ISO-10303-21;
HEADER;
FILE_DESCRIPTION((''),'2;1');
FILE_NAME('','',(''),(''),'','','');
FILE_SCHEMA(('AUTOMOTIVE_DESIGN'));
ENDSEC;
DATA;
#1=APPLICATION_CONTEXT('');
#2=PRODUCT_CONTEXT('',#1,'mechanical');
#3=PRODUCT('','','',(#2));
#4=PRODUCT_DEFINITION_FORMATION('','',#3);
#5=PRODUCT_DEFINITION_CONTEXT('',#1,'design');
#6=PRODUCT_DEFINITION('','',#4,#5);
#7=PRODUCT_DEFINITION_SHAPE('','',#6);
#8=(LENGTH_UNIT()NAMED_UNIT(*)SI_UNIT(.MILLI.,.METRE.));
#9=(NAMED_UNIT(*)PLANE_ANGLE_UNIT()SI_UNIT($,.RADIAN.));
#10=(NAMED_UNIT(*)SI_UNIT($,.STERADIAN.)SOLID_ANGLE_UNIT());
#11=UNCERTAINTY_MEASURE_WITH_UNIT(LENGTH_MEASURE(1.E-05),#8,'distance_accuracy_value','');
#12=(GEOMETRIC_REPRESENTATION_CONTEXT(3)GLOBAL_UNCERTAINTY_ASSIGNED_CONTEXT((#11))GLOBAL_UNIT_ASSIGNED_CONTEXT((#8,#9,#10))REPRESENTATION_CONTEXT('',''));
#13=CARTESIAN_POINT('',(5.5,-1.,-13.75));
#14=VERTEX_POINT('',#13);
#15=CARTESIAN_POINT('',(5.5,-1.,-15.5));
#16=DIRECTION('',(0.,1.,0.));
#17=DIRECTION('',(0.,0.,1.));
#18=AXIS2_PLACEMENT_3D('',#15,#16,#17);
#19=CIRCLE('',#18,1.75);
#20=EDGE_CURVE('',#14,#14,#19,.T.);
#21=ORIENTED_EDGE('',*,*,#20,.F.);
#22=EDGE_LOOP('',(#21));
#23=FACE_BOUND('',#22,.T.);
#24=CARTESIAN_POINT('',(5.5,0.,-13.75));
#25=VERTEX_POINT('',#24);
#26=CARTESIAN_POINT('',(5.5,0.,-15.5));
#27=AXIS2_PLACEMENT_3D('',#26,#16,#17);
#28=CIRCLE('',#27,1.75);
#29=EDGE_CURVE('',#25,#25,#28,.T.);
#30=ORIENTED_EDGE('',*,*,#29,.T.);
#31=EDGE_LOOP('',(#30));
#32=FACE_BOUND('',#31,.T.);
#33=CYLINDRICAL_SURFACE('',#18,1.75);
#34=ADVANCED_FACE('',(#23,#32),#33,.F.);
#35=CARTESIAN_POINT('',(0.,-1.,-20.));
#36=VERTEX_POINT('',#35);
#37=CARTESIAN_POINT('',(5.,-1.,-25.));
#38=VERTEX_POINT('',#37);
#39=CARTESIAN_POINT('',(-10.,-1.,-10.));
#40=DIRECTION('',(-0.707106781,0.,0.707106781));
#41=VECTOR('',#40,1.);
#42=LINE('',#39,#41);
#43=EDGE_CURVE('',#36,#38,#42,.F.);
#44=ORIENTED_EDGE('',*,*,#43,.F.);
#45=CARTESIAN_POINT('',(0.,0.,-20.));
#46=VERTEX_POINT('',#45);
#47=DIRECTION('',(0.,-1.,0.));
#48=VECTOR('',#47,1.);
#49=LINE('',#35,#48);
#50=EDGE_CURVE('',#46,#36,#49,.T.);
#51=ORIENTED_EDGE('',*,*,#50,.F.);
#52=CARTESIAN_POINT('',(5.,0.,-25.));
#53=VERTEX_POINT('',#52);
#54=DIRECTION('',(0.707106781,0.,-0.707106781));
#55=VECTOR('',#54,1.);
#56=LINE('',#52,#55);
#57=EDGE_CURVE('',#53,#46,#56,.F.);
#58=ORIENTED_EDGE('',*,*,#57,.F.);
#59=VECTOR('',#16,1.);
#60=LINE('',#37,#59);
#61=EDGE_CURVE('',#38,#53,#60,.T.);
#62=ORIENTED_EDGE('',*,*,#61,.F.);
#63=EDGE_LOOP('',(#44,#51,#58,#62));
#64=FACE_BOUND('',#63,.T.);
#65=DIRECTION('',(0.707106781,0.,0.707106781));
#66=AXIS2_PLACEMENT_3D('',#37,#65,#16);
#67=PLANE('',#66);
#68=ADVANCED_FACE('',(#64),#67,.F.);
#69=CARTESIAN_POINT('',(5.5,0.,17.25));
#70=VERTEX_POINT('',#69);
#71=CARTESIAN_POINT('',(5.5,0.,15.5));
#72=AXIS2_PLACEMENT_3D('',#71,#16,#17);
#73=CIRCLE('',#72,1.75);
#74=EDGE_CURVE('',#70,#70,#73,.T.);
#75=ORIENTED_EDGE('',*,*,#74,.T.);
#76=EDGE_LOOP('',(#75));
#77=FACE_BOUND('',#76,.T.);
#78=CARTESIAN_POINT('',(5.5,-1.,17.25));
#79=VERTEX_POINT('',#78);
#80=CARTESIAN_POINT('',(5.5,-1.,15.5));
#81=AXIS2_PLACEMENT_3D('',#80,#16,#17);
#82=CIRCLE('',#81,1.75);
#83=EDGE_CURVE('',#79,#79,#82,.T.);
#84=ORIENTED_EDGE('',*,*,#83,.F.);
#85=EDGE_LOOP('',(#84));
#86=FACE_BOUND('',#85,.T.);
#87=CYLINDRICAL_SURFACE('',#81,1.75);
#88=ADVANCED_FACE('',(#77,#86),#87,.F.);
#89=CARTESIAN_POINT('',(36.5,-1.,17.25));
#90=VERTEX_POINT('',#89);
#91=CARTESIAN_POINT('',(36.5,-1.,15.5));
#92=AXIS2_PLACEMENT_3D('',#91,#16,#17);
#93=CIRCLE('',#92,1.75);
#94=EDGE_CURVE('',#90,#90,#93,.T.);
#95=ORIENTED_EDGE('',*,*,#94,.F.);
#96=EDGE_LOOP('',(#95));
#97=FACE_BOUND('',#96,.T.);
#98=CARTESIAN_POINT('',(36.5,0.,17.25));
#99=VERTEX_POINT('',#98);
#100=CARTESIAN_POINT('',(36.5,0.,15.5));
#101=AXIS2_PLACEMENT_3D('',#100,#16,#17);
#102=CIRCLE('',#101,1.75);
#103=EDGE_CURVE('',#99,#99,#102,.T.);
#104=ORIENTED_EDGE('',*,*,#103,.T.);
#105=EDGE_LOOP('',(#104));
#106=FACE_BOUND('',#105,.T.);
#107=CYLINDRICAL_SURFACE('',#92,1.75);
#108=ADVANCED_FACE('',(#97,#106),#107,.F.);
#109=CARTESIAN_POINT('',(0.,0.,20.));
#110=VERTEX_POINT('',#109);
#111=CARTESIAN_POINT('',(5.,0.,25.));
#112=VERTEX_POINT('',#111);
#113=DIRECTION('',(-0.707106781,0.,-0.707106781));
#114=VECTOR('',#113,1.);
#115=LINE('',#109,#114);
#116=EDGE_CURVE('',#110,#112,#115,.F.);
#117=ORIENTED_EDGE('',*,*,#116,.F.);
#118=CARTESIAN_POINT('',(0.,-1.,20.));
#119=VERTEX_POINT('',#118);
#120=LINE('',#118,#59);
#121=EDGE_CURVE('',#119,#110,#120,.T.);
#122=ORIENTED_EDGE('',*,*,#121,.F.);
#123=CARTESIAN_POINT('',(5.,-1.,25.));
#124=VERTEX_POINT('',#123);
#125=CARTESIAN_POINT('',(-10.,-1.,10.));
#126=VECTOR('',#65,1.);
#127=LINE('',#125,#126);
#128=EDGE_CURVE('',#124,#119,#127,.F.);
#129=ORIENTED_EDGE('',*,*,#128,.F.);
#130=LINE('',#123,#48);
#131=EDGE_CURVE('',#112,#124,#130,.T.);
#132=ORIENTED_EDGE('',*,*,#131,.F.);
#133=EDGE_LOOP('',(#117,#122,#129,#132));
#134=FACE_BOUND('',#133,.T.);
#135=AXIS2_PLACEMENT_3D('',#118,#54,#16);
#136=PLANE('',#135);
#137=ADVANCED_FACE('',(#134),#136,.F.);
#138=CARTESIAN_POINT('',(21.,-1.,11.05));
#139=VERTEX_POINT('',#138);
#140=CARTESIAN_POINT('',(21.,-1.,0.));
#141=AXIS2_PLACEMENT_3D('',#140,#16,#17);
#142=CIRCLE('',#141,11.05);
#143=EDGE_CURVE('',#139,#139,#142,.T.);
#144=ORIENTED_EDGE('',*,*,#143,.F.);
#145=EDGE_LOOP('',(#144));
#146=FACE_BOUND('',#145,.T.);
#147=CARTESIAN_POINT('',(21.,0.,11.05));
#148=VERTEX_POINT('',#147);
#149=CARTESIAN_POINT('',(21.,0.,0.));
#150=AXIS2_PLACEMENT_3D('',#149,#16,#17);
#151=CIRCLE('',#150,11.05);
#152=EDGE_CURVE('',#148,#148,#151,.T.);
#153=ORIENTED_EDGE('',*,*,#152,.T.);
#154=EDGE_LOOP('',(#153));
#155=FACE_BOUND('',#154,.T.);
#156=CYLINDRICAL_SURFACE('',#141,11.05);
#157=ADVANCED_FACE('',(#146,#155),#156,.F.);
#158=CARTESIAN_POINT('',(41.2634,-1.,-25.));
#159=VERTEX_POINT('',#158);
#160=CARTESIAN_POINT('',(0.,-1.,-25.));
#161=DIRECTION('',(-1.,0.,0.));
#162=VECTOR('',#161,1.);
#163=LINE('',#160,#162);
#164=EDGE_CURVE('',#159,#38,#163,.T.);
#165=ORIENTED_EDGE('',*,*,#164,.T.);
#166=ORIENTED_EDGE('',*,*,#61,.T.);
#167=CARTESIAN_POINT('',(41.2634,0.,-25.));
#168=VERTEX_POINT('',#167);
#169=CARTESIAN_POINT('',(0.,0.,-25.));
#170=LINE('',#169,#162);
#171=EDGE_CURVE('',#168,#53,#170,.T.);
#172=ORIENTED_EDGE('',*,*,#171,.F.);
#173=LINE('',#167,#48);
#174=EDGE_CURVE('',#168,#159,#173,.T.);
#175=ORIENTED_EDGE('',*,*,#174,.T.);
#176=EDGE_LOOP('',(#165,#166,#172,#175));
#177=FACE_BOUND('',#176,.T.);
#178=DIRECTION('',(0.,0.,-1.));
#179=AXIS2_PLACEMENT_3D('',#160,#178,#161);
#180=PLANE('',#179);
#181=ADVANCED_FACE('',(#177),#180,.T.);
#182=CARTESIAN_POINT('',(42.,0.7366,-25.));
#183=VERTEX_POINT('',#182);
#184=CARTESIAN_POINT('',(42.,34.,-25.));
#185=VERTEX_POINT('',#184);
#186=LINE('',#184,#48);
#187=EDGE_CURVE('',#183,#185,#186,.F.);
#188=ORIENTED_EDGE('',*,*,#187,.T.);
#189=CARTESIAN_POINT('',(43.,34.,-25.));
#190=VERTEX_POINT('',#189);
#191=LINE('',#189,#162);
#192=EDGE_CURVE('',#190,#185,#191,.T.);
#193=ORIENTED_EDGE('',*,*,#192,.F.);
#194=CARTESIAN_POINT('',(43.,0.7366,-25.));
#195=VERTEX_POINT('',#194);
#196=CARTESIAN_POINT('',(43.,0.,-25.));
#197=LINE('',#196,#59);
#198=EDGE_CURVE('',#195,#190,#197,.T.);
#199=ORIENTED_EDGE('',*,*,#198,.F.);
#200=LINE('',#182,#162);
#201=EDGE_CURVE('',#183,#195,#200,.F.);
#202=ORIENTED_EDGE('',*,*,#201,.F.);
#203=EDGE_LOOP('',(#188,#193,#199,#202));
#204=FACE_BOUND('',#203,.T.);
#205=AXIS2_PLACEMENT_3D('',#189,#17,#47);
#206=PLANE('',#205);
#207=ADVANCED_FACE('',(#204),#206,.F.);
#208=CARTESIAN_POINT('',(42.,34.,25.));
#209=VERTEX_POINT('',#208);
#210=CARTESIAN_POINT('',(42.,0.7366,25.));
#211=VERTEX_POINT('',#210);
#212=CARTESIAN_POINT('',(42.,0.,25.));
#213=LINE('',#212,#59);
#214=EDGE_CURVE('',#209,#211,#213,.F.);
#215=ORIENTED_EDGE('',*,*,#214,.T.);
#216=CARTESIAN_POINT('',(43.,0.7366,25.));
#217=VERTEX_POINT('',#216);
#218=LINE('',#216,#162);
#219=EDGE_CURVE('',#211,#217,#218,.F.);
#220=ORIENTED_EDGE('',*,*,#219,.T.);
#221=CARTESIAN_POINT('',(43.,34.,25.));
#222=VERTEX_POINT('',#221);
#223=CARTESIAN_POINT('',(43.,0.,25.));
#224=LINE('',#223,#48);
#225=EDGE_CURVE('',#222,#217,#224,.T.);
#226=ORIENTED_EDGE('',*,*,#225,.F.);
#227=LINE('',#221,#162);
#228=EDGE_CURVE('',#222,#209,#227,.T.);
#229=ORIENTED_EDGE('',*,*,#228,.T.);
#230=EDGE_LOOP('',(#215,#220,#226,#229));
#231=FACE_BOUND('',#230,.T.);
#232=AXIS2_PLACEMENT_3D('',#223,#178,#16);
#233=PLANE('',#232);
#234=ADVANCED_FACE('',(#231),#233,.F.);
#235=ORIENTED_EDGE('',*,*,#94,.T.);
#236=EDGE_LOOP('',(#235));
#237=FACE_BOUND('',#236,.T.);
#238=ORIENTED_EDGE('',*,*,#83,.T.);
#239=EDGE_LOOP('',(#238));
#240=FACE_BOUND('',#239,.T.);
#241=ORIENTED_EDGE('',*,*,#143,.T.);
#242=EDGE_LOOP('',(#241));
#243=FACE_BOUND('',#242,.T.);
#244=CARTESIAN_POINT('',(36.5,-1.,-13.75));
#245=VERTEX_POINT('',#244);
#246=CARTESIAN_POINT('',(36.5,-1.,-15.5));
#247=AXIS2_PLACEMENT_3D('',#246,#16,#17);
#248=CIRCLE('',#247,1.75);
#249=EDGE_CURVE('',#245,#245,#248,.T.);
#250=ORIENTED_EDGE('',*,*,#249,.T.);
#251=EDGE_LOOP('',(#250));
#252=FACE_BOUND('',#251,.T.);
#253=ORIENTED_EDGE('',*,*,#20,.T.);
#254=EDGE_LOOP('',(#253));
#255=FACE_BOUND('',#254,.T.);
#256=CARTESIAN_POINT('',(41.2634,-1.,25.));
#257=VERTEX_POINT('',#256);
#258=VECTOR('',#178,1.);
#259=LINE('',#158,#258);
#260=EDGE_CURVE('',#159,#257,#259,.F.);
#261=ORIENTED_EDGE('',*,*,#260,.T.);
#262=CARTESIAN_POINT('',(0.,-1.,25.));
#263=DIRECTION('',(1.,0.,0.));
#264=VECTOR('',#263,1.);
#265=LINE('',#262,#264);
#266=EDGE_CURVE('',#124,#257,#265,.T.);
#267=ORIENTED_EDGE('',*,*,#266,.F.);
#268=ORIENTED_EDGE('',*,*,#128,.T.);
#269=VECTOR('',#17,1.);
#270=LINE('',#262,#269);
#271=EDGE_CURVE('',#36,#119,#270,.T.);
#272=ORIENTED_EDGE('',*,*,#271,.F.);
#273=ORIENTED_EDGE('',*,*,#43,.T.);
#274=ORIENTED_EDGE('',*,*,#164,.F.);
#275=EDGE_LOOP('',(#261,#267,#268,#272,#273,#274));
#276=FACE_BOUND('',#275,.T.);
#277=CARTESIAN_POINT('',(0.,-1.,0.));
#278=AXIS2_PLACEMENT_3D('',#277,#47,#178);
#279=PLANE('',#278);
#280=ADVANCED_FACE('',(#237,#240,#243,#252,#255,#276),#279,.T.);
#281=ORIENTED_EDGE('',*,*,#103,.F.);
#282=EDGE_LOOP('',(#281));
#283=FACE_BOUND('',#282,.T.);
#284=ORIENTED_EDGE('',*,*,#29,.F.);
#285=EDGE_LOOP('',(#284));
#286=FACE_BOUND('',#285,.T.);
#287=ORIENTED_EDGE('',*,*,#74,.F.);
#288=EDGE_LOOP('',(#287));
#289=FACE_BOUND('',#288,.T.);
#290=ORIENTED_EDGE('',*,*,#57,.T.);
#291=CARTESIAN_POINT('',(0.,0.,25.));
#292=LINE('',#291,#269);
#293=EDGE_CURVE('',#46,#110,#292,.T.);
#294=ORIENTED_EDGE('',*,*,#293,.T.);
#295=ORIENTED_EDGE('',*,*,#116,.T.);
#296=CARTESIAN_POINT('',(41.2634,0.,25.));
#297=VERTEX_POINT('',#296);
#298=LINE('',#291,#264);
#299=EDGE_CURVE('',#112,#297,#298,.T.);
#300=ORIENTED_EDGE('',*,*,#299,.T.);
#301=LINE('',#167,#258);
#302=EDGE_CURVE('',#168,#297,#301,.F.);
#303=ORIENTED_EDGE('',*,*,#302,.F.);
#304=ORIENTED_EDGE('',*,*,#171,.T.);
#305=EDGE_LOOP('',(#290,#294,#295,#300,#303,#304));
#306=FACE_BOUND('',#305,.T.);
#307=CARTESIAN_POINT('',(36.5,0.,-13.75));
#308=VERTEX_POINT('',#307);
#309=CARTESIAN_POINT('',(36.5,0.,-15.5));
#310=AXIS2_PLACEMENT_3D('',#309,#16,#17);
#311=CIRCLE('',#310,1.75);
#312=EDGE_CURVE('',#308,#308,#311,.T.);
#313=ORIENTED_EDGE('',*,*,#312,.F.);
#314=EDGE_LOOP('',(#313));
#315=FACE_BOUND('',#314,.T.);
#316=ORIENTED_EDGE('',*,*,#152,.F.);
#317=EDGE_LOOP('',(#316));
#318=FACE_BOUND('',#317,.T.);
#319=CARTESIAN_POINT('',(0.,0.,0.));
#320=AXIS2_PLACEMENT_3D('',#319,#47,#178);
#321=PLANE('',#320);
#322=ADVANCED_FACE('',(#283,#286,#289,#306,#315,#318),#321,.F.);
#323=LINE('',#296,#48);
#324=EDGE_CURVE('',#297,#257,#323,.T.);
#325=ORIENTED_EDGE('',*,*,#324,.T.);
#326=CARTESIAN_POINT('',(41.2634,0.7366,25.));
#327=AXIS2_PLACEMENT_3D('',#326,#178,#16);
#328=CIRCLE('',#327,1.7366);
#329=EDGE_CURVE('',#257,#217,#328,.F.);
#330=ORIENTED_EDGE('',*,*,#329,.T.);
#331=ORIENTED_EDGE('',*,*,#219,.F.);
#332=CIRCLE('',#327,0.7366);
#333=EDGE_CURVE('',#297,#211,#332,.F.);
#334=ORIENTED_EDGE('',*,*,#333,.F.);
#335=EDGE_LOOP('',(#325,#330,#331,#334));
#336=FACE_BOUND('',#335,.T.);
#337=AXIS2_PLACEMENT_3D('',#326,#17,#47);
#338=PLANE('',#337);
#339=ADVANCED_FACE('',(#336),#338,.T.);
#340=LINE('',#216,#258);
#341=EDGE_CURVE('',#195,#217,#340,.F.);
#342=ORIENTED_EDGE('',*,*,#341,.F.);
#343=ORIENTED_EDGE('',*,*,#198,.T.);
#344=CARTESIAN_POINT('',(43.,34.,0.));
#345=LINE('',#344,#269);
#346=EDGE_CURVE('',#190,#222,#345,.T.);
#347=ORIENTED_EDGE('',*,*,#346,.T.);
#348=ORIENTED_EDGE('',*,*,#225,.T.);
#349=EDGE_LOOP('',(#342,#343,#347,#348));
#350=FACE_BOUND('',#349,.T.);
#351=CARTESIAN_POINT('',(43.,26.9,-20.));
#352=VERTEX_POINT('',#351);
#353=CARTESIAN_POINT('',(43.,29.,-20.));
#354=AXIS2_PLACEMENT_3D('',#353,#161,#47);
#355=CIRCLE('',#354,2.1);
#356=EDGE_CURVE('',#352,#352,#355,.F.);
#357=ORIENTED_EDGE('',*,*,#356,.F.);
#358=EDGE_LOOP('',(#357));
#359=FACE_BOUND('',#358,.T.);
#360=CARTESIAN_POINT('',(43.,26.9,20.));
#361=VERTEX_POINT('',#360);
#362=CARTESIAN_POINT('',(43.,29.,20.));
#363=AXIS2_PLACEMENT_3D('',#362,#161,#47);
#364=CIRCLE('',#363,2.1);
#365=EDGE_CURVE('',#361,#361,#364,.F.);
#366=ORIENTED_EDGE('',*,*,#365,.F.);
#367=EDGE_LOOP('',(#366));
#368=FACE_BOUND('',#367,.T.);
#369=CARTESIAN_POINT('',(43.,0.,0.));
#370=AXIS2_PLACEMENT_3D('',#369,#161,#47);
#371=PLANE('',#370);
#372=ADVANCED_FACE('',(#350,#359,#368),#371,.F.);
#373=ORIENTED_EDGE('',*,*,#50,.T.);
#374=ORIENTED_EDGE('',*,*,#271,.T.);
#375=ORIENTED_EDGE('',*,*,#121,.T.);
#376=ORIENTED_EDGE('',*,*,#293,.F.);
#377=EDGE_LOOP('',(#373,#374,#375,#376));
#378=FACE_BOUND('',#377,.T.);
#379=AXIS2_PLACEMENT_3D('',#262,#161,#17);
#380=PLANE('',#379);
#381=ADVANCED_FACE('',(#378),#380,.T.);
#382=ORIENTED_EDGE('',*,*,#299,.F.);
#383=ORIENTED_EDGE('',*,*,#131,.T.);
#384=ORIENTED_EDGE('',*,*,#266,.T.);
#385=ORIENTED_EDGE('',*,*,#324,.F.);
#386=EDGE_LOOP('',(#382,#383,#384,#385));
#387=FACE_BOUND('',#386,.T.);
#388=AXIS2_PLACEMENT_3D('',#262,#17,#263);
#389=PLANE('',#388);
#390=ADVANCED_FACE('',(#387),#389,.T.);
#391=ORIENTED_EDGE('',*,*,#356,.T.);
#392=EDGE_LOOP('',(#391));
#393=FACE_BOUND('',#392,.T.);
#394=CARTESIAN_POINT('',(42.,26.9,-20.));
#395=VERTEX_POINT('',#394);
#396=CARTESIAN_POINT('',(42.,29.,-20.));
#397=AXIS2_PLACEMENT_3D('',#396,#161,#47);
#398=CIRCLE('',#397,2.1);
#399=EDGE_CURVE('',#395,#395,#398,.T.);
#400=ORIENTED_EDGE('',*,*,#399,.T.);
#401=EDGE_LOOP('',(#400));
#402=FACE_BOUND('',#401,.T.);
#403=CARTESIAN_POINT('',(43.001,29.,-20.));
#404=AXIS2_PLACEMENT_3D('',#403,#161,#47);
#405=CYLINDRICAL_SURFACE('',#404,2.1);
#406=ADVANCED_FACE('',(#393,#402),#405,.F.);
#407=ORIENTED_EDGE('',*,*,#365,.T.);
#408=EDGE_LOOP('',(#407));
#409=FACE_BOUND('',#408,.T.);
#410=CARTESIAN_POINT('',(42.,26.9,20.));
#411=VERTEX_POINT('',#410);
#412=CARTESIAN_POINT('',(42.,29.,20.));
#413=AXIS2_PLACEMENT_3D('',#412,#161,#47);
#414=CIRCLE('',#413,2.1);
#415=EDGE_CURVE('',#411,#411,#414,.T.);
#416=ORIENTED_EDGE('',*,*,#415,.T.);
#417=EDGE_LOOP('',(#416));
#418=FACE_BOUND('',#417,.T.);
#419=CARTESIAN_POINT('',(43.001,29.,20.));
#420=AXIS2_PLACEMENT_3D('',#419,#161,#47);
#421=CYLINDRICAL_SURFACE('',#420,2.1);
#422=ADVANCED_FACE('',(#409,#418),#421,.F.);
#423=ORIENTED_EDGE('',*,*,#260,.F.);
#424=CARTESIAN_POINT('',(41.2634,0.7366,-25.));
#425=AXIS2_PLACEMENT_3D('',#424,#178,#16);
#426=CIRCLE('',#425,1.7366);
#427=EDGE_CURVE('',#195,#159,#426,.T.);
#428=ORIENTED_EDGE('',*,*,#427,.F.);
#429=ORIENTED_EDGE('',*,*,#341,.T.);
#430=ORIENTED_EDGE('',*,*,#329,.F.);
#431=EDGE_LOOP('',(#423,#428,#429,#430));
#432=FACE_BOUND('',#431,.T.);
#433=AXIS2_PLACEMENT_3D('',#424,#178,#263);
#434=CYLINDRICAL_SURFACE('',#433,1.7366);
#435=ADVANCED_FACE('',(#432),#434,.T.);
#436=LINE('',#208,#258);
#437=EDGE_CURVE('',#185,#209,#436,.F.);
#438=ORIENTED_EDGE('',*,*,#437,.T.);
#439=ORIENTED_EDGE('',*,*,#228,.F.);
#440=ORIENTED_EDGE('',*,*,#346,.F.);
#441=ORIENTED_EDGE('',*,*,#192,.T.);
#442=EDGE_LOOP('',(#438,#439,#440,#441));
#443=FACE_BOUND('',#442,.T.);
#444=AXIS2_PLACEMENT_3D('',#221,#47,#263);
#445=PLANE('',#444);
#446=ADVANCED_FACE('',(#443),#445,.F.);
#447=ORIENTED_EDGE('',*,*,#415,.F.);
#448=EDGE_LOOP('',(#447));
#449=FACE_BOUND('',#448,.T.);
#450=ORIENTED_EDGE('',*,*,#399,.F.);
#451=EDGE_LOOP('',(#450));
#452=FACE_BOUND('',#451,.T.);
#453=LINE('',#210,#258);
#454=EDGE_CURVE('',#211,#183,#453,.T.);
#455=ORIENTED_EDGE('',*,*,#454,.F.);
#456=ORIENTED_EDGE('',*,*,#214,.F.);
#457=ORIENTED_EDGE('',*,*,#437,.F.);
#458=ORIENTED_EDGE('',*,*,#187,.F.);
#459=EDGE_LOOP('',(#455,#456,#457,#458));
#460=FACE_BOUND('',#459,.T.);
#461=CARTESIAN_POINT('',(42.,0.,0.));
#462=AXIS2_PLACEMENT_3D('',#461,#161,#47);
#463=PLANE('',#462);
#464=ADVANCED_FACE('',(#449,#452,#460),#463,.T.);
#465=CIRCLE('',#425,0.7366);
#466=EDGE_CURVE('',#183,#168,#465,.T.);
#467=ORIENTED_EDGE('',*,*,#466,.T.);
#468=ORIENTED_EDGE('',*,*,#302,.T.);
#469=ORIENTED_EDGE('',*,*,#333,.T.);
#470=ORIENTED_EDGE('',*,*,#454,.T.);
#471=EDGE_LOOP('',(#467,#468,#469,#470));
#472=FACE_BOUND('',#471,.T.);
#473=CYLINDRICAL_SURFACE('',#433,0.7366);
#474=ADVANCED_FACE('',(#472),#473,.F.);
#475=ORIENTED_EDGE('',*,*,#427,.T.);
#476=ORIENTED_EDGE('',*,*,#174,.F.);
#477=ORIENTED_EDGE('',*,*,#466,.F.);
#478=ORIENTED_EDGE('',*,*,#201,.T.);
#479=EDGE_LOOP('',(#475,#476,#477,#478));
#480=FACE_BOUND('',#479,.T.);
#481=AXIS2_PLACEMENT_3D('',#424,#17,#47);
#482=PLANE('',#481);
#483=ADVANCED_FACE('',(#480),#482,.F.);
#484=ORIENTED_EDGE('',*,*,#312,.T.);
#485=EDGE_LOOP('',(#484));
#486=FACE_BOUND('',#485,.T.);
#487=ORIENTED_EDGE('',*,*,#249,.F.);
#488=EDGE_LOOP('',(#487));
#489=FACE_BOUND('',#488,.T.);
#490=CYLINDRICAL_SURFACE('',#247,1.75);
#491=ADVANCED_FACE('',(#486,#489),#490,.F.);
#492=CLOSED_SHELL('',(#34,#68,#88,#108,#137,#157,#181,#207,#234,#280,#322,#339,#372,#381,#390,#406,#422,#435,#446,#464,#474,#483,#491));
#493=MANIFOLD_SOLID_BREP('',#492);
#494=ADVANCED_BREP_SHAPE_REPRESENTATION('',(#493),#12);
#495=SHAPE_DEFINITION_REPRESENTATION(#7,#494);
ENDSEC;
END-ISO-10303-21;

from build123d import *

# Parameters (mm, degrees)
SKETCH1_W                    = 43
SKETCH1_H                    = 50
BASE_FLANGE1_DEPTH           = 1
SKETCH2_R                    = 11.05
SKETCH2_R_2                  = 1.75
CUT_EXTRUDE1_DEPTH           = 50.749371855
EDGE_FLANGE1_STRIP_W         = 5.4732
EDGE_FLANGE1_STRIP_H         = 1
EDGE_FLANGE1_STRIP_CUT_DEPTH = 50
EDGE_FLANGE1_DEPTH           = 50
CUT_EXTRUDE2_REACH           = 61.54
SKETCH8_R                    = 2.1
CHAMFER1_SIZE                = 5


# Sheet-metal steps are written as plain solids
with BuildPart() as part:
    # Sketch1 → Base-Flange1 (new body)
    with BuildSketch(Plane(origin=(0, 0, 0), x_dir=(1, 0, 0), z_dir=(0, 1, 0))):
        with Locations((21.5, 0)):
            Rectangle(SKETCH1_W, SKETCH1_H)
    extrude(amount=-BASE_FLANGE1_DEPTH)

    # Sketch2 → Cut-Extrude1 (cut, through all)
    with BuildSketch(Plane(origin=(0, 0, 0), x_dir=(1, 0, 0), z_dir=(0, 1, 0))):
        with Locations(Location((21, 0, 0), (0, 0, 270))):
            Circle(SKETCH2_R)
        with Locations(Location((5.5, 15.5, 0), (0, 0, 270))):
            Circle(SKETCH2_R_2)
        with Locations(Location((36.5, 15.5, 0), (0, 0, 270))):
            Circle(SKETCH2_R_2)
        with Locations(Location((36.5, -15.5, 0), (0, 0, 270))):
            Circle(SKETCH2_R_2)
        with Locations(Location((5.5, -15.5, 0), (0, 0, 270))):
            Circle(SKETCH2_R_2)
    extrude(amount=-CUT_EXTRUDE1_DEPTH, mode=Mode.SUBTRACT)

    # Edge-Flange1 strip (across the edge) → Edge-Flange1 strip cut (cut)
    with BuildSketch(Plane(origin=(43, 0, 25), x_dir=(-1, 0, 0), z_dir=(0, 0, -1))):
        with Locations((-1, -0.5)):
            Rectangle(EDGE_FLANGE1_STRIP_W, EDGE_FLANGE1_STRIP_H)
    extrude(amount=EDGE_FLANGE1_STRIP_CUT_DEPTH, mode=Mode.SUBTRACT)

    # Edge-Flange1 section (across the edge) → Edge-Flange1 (add)
    with BuildSketch(Plane(origin=(43, 0, 25), x_dir=(-1, 0, 0), z_dir=(0, 0, -1))):
        with BuildLine():
            Line((0, 0.7366), (0, 34))
            Line((0, 34), (1, 34))
            Line((1, 34), (1, 0.7366))
            ThreePointArc((1, 0.7366), (1.215745145, 0.215745145), (1.7366, 0))
            Line((1.7366, 0), (1.7366, -1))
            ThreePointArc((1.7366, -1), (0.508638364, -0.491361636), (0, 0.7366))
        make_face()
    extrude(amount=EDGE_FLANGE1_DEPTH)

    # Sketch8 → Cut-Extrude2 (cut, up to next)
    with BuildSketch(Plane.ZY.offset(-42), mode=Mode.PRIVATE) as cut_extrude2_sk1:
        with Locations(Location((20, 29, 0), (0, 0, 270))):
            Circle(SKETCH8_R)
    cut_extrude2_tool1 = extrude(cut_extrude2_sk1.sketch, amount=-CUT_EXTRUDE2_REACH, mode=Mode.PRIVATE) & part.part
    # Sketch8 → Cut-Extrude2 (cut, up to next)
    with BuildSketch(Plane.ZY.offset(-42), mode=Mode.PRIVATE) as cut_extrude2_sk2:
        with Locations(Location((-20, 29, 0), (0, 0, 270))):
            Circle(SKETCH8_R)
    cut_extrude2_tool2 = extrude(cut_extrude2_sk2.sketch, amount=-CUT_EXTRUDE2_REACH, mode=Mode.PRIVATE) & part.part
    add(cut_extrude2_tool1.solids().sort_by_distance((42, 29, 20))[0], mode=Mode.SUBTRACT)
    add(cut_extrude2_tool2.solids().sort_by_distance((42, 29, -20))[0], mode=Mode.SUBTRACT)

    # Chamfer1
    chamfer1_edges = [part.edges().sort_by_distance(p)[0] for p in [
        (0, -0.5, -25),
        (0, -0.5, 25),
    ]]
    chamfer(chamfer1_edges, length=CHAMFER1_SIZE)


solid = part.part
